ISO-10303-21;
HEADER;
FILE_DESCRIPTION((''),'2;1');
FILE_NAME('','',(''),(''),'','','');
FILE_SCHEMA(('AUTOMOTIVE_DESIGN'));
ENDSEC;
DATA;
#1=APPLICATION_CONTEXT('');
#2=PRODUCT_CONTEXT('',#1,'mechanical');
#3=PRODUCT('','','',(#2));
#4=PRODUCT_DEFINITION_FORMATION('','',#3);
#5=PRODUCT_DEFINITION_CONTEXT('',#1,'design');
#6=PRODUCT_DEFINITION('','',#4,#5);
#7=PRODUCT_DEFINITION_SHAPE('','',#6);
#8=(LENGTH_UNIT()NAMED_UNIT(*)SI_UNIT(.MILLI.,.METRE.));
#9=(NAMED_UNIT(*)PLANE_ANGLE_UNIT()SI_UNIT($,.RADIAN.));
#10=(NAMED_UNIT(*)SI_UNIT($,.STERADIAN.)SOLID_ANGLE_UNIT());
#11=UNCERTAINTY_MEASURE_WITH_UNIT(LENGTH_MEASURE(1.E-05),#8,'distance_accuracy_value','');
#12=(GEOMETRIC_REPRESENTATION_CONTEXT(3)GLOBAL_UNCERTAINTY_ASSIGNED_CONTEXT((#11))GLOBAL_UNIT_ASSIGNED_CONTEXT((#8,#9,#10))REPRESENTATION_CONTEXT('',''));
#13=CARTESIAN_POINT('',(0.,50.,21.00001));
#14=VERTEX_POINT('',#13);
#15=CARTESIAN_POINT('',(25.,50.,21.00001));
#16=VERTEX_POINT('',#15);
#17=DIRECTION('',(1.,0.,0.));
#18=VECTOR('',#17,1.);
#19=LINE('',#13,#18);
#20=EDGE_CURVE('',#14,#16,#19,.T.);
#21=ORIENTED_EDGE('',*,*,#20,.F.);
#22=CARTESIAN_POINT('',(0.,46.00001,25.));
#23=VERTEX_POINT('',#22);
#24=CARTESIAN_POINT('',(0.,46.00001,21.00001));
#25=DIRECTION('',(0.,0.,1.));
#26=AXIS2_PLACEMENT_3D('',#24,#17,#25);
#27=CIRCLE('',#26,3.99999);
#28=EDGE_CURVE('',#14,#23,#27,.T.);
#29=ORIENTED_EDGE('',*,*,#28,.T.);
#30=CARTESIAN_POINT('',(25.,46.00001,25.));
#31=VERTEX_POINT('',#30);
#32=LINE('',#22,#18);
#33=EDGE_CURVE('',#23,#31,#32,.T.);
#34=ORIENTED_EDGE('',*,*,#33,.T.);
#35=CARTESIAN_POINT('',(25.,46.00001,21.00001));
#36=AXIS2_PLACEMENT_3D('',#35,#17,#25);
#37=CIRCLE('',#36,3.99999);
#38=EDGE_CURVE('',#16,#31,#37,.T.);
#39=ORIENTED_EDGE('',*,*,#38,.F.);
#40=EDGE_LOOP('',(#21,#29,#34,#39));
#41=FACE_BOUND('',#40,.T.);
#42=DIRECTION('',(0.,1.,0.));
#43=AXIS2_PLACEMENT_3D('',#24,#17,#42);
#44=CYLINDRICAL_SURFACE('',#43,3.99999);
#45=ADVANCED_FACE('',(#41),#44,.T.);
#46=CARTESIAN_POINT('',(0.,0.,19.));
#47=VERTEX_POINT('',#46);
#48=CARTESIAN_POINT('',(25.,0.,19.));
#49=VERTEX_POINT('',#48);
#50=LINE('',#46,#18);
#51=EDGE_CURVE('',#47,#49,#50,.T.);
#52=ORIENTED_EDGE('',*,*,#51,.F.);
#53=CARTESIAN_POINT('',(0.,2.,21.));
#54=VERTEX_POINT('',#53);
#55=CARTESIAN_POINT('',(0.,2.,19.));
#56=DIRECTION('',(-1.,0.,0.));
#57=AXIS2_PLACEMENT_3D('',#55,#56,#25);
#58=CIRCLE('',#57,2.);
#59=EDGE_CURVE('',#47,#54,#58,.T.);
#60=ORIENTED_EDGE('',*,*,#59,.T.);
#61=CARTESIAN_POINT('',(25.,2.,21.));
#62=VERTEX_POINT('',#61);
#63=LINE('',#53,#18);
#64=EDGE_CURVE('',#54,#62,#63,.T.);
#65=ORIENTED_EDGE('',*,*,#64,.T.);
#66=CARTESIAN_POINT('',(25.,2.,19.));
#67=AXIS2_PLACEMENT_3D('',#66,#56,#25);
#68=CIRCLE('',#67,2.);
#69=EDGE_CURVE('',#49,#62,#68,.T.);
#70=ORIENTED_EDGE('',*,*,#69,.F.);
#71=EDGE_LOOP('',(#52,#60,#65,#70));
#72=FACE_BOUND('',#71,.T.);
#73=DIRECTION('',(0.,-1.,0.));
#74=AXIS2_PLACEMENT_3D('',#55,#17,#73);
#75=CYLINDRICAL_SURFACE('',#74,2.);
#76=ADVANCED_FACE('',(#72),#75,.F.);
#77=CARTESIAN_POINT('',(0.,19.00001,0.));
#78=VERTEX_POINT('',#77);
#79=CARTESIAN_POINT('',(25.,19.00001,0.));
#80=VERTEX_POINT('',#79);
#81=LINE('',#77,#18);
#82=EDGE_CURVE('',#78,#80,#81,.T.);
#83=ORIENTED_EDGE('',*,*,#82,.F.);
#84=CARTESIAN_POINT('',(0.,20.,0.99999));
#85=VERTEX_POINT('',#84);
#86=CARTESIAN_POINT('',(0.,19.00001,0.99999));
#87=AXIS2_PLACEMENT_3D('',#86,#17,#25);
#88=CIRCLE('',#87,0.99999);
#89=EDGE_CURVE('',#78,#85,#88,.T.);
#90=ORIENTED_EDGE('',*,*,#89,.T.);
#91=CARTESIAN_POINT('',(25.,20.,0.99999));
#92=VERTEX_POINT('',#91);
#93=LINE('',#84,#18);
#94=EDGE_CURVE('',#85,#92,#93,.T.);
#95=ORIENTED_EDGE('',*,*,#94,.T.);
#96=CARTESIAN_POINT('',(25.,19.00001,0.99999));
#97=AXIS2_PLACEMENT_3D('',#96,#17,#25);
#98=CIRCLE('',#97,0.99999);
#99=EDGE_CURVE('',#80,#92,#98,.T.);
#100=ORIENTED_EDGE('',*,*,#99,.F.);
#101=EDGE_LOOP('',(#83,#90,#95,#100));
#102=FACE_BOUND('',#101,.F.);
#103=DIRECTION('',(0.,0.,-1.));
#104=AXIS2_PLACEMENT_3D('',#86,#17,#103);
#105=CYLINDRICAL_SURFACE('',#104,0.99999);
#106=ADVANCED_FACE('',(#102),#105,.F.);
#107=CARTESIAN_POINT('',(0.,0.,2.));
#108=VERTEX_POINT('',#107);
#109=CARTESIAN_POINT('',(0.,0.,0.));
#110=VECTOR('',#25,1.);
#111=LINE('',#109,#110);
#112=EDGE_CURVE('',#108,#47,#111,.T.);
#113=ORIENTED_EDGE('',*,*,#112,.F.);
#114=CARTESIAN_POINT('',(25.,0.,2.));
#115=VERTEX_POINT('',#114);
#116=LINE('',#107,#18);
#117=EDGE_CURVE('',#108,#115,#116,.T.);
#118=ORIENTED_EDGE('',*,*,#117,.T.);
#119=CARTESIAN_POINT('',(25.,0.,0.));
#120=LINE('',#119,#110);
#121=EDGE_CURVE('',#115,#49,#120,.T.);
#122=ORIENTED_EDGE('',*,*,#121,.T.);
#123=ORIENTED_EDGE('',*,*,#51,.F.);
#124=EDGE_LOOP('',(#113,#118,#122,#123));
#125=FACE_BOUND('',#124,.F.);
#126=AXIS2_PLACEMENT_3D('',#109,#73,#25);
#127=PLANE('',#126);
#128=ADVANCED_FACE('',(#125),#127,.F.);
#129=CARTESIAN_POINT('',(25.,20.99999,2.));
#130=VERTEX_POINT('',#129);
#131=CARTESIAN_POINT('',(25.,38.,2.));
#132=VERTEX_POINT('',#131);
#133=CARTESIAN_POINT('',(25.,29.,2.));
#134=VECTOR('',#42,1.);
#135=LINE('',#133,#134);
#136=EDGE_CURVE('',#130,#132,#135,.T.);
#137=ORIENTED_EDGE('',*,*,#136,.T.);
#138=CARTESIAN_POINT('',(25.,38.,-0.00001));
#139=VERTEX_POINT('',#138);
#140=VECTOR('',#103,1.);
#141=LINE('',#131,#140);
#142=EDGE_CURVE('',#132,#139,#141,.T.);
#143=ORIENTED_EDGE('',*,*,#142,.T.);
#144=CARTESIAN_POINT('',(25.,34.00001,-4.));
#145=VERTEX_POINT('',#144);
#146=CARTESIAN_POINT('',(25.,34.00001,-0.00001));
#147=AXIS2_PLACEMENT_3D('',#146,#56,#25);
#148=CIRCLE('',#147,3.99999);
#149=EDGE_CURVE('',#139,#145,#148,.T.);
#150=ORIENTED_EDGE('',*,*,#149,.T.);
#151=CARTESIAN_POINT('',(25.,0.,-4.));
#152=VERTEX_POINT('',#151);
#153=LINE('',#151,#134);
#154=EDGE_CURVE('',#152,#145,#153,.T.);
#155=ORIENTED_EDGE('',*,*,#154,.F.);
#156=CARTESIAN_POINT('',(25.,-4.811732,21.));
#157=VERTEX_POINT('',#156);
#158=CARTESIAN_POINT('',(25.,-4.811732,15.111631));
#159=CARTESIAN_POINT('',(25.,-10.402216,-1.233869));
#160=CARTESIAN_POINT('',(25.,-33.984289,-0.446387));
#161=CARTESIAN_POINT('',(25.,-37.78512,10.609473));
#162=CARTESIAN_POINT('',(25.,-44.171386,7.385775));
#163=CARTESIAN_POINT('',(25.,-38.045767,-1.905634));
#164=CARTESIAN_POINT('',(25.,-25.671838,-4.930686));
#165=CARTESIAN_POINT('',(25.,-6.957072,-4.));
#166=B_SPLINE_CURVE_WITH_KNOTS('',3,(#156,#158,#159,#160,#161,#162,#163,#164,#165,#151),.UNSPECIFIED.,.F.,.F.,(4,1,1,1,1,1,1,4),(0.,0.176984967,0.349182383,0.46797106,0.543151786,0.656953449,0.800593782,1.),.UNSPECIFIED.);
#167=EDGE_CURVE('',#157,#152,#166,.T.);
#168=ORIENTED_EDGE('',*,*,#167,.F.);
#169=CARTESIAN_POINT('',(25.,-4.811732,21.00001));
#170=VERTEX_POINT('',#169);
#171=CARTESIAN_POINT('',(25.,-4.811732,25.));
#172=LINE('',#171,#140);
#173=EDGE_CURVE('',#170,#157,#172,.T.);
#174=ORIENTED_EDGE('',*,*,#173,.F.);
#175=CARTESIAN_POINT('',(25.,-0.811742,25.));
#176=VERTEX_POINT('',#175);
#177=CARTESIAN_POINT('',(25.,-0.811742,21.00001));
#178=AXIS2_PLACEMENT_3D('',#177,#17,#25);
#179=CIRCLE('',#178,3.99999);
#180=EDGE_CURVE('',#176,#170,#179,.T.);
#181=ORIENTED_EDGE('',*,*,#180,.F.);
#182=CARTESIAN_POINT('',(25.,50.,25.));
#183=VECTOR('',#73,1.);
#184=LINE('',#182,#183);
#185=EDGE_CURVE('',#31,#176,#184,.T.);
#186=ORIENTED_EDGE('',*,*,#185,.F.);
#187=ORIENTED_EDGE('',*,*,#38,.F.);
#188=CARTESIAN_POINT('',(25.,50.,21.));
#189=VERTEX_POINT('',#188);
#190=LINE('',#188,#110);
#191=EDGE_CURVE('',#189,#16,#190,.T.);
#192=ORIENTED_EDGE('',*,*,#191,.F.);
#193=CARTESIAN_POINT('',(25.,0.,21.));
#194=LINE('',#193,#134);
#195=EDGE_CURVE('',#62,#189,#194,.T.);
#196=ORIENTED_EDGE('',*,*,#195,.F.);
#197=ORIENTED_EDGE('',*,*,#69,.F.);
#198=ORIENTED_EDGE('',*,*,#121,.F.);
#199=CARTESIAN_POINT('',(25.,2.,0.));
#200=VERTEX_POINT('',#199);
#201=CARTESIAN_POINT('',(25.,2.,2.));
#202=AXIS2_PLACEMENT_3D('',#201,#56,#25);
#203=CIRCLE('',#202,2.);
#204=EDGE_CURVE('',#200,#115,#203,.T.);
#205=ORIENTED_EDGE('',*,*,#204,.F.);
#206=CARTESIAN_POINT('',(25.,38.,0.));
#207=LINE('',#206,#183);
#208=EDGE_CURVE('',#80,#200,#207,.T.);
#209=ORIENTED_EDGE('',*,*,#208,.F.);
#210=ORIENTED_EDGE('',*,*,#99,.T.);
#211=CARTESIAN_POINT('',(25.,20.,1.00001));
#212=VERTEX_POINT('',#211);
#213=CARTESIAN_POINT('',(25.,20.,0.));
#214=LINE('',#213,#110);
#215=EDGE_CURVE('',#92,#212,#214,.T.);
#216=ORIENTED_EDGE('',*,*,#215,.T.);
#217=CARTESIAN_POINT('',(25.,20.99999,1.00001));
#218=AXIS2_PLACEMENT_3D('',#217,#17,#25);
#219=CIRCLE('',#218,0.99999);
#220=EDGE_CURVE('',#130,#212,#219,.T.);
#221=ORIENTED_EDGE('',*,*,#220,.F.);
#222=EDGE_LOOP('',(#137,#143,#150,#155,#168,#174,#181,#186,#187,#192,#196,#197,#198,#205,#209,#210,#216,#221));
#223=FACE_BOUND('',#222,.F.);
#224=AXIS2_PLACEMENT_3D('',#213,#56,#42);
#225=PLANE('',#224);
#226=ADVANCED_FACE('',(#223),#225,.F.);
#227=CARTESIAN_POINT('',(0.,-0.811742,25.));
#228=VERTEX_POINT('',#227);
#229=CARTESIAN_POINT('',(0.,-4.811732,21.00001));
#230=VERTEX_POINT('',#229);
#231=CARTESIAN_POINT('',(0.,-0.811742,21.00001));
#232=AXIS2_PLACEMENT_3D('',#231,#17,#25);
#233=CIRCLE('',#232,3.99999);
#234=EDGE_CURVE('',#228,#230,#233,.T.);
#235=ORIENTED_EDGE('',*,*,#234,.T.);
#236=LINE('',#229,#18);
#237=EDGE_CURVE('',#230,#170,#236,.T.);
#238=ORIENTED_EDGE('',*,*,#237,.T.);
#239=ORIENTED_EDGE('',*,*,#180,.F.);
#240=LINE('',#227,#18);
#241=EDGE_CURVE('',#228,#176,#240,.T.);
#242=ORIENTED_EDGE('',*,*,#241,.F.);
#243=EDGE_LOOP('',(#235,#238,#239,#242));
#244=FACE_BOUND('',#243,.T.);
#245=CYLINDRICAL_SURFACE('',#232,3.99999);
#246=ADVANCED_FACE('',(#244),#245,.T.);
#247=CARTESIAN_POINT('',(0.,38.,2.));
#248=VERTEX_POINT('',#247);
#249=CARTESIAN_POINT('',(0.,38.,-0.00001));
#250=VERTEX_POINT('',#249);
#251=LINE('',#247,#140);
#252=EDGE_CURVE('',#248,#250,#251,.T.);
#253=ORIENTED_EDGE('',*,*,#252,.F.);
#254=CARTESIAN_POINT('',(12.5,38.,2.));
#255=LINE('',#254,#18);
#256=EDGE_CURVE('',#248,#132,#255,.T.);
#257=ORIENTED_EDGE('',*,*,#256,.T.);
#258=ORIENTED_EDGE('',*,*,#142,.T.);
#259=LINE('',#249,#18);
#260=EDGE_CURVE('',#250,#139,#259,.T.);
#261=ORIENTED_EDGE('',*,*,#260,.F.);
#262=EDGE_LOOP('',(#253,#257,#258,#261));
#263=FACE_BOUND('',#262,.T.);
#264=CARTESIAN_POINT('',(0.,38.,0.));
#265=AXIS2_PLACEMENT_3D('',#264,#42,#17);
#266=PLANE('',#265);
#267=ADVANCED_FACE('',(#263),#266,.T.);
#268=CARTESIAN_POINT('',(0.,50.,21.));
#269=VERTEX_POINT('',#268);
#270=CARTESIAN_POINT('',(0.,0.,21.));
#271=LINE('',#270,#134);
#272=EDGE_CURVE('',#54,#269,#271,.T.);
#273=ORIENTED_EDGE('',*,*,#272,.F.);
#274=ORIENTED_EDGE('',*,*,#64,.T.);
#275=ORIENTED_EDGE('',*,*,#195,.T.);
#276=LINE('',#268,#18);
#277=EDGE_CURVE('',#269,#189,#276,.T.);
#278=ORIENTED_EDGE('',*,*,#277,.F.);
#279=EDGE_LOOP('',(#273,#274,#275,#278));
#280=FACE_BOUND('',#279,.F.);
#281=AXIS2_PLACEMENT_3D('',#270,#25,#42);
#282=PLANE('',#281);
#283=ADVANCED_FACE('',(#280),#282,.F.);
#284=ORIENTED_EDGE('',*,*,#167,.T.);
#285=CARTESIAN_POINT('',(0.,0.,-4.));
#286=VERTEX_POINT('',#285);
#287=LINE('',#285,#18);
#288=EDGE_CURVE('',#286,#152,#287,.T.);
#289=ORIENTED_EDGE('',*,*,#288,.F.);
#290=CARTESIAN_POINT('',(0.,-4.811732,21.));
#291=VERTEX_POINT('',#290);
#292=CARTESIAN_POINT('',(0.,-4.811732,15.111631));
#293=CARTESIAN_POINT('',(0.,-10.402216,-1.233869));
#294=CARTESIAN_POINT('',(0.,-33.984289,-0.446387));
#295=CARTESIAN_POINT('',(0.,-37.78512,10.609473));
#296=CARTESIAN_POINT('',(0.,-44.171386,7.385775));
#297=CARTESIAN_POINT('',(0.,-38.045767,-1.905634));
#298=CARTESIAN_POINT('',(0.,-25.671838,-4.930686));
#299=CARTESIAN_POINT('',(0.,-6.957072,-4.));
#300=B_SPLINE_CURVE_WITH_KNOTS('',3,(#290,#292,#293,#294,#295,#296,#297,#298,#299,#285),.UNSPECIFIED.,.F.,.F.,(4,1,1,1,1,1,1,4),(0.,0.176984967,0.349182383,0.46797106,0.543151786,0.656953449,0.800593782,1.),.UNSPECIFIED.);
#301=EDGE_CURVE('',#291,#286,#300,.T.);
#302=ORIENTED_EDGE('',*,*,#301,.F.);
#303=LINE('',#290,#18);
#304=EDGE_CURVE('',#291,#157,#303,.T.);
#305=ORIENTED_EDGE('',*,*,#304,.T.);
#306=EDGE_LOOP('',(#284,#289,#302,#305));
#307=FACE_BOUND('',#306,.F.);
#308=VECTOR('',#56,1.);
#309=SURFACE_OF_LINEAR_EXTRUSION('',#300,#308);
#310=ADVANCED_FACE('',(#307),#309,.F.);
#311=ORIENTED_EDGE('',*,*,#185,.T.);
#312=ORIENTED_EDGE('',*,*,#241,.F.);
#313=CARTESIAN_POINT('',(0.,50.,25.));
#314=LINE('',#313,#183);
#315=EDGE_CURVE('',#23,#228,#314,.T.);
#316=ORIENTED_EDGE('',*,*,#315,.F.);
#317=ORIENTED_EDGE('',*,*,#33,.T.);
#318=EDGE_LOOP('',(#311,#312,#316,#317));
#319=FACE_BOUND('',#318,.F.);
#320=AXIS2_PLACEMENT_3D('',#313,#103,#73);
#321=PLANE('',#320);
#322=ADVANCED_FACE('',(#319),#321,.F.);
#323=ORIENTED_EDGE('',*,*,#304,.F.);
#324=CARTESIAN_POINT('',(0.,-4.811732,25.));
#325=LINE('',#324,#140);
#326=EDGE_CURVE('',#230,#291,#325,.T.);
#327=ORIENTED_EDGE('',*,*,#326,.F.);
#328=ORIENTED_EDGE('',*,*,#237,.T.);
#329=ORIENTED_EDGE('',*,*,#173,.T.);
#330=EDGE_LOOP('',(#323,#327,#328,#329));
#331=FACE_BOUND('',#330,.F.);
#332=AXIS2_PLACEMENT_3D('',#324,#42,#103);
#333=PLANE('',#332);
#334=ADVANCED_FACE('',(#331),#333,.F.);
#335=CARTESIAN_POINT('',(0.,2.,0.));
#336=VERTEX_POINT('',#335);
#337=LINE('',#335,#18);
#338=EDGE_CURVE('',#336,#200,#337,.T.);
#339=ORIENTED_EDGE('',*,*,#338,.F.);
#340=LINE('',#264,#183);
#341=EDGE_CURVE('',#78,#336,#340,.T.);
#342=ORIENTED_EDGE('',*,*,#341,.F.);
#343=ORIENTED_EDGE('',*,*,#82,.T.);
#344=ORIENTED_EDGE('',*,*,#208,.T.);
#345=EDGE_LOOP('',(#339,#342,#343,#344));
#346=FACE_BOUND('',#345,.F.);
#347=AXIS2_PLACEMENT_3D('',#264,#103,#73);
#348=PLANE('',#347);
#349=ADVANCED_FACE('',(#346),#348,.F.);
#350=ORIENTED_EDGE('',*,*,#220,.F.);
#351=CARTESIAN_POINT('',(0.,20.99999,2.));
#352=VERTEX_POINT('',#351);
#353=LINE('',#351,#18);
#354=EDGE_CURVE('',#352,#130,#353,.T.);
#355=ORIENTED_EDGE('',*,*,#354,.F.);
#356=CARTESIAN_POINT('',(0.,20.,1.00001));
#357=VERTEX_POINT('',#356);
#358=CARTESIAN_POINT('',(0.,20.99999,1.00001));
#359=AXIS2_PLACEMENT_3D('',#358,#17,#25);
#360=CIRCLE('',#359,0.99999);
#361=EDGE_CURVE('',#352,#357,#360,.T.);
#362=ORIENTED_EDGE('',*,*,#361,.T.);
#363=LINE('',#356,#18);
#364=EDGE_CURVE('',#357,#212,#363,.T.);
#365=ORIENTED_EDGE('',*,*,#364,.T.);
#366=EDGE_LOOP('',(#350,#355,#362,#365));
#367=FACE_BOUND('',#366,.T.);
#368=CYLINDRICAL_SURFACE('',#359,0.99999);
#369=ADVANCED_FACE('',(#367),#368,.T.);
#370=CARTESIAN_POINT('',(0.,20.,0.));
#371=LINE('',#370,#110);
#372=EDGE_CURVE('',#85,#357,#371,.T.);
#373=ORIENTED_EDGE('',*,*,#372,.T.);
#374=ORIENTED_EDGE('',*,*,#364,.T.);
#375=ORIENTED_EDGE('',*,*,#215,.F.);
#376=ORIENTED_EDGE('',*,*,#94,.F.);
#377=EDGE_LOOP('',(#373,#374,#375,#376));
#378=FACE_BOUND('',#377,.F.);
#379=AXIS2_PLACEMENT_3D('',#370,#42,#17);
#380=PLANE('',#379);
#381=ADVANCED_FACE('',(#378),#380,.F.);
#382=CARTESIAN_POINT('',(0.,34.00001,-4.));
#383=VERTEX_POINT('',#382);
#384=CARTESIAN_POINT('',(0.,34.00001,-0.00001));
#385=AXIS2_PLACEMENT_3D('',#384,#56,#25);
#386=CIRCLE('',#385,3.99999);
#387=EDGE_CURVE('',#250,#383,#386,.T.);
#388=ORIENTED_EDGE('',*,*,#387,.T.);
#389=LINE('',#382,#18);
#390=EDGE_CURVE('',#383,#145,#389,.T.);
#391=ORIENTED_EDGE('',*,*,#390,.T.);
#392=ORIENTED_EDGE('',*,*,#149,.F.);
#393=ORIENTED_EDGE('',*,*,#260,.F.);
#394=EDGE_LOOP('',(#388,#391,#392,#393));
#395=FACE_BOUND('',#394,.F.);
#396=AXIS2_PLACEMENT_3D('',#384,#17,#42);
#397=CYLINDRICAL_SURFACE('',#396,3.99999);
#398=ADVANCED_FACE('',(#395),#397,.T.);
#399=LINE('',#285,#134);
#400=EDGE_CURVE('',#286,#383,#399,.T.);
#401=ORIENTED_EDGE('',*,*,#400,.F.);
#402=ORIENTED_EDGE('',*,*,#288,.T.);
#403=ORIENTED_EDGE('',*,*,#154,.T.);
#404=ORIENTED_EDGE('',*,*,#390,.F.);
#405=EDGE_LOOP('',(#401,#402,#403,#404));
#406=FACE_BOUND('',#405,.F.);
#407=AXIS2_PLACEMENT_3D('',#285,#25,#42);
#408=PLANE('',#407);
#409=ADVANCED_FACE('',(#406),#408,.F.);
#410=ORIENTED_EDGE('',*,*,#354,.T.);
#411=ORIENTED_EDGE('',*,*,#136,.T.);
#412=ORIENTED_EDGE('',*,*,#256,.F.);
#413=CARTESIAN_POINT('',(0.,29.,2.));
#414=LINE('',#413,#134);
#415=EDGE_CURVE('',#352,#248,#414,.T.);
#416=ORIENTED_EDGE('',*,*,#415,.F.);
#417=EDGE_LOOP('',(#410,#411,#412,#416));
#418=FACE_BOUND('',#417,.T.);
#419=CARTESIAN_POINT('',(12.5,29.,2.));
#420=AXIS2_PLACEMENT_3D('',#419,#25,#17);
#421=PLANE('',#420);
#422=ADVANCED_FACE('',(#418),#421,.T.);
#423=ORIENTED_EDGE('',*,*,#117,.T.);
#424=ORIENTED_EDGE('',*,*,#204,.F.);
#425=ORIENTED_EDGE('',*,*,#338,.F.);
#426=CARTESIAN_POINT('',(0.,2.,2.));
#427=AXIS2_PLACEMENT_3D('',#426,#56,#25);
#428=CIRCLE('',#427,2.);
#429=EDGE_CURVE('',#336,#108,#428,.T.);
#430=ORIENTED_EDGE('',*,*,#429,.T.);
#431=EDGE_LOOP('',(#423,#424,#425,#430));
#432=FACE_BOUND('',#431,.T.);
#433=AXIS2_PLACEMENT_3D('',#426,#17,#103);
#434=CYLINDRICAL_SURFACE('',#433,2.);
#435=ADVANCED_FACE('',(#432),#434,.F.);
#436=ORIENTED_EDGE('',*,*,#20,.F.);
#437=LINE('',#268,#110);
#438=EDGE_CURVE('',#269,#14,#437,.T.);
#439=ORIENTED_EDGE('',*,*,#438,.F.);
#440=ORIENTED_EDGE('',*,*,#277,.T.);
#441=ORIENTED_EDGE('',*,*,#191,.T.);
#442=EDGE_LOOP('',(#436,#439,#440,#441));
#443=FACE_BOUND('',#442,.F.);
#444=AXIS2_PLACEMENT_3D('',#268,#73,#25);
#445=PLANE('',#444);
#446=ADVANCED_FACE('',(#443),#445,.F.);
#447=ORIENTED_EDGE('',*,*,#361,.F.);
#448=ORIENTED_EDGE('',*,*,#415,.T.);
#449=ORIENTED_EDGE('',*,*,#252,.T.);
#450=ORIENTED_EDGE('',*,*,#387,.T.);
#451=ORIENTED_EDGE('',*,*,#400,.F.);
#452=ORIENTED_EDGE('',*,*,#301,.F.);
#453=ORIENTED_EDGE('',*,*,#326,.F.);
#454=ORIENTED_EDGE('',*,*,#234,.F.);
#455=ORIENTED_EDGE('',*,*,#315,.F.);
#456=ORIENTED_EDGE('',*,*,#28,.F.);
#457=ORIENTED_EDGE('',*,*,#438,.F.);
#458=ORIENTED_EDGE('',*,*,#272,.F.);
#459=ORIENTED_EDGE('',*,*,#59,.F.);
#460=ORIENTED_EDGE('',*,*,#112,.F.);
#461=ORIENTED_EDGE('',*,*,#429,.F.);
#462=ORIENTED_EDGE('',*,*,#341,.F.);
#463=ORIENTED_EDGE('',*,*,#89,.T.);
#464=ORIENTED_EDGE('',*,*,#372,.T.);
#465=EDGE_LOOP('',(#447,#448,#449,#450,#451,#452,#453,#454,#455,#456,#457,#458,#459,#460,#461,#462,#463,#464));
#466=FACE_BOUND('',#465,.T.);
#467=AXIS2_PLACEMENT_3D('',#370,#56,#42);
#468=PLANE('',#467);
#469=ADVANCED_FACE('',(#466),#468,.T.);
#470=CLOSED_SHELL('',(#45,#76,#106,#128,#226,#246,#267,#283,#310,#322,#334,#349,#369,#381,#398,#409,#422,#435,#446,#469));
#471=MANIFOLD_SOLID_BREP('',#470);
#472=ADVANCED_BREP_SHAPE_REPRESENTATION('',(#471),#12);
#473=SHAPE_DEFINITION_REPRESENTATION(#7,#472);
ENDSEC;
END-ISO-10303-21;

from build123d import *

# Parameters (mm, degrees)
F1_DEPTH = 25
F2_R     = 3.99999
F3_R     = 2
F4_W     = 25
F4_H     = 18
F5_DEPTH = 2
F6_R     = 0.99999


# Not quite as in the source:
# - a fillet or chamfer is up to 0.001 mm smaller than in the source, because OpenCascade refuses the exact size


with BuildPart() as f1:
    # F0 (on Right) → F1 (new body)
    with BuildSketch(Plane.YZ):
        with BuildLine():
            Line((38, -4), (38, 0))
            Line((38, 0), (0, 0))
            Line((0, 0), (0, 21))
            Line((0, 21), (50, 21))
            Line((50, 21), (50, 25))
            Line((50, 25), (-4.8117317967, 25))
            Line((-4.8117317967, 25), (-4.8117317967, 21))
            add(Edge.make_bspline(
                [(-4.8117317967, 21), (-4.8117317967, 15.1116313237), (-10.4022162379, -1.2338685341), (-33.9842886789, -0.4463867162), (-37.7851196704, 10.6094730484), (-44.1713858953, 7.385774766), (-38.045766604, -1.9056337415), (-25.67183797, -4.930685629), (-6.9570716316, -4), (0, -4)],
                knots=[0, 0, 0, 0, 0.1769849674, 0.3491823831, 0.4679710597, 0.5431517863, 0.6569534494, 0.8005937823, 1, 1, 1, 1], degree=3))
            Line((0, -4), (38, -4))
        make_face()
    extrude(amount=F1_DEPTH)

    # F2 (radius 4 in the source; OpenCascade refuses exactly that, so slightly less here)
    f2_edges = [f1.edges().sort_by_distance(p)[0] for p in [
        (12.5, -4.811732, 25),
        (12.5, 50, 25),
        (12.5, 38, -4),
    ]]
    fillet(f2_edges, radius=F2_R)

    # F3
    f3_edges = [f1.edges().sort_by_distance(p)[0] for p in [
        (12.5, 0, 21),
        (12.5, 0, 0),
    ]]
    fillet(f3_edges, radius=F3_R)

    # F4 (on face) → F5 (join)
    with BuildSketch(Plane.XY):
        with Locations((12.5, 29)):
            Rectangle(F4_W, F4_H)
    extrude(amount=F5_DEPTH)

    # F6 (radius 1 in the source; OpenCascade refuses exactly that, so slightly less here)
    f6_edges = [f1.edges().sort_by_distance(p)[0] for p in [
        (12.5, 20, 0),
        (12.5, 20, 2),
    ]]
    fillet(f6_edges, radius=F6_R)


solid = f1.part
